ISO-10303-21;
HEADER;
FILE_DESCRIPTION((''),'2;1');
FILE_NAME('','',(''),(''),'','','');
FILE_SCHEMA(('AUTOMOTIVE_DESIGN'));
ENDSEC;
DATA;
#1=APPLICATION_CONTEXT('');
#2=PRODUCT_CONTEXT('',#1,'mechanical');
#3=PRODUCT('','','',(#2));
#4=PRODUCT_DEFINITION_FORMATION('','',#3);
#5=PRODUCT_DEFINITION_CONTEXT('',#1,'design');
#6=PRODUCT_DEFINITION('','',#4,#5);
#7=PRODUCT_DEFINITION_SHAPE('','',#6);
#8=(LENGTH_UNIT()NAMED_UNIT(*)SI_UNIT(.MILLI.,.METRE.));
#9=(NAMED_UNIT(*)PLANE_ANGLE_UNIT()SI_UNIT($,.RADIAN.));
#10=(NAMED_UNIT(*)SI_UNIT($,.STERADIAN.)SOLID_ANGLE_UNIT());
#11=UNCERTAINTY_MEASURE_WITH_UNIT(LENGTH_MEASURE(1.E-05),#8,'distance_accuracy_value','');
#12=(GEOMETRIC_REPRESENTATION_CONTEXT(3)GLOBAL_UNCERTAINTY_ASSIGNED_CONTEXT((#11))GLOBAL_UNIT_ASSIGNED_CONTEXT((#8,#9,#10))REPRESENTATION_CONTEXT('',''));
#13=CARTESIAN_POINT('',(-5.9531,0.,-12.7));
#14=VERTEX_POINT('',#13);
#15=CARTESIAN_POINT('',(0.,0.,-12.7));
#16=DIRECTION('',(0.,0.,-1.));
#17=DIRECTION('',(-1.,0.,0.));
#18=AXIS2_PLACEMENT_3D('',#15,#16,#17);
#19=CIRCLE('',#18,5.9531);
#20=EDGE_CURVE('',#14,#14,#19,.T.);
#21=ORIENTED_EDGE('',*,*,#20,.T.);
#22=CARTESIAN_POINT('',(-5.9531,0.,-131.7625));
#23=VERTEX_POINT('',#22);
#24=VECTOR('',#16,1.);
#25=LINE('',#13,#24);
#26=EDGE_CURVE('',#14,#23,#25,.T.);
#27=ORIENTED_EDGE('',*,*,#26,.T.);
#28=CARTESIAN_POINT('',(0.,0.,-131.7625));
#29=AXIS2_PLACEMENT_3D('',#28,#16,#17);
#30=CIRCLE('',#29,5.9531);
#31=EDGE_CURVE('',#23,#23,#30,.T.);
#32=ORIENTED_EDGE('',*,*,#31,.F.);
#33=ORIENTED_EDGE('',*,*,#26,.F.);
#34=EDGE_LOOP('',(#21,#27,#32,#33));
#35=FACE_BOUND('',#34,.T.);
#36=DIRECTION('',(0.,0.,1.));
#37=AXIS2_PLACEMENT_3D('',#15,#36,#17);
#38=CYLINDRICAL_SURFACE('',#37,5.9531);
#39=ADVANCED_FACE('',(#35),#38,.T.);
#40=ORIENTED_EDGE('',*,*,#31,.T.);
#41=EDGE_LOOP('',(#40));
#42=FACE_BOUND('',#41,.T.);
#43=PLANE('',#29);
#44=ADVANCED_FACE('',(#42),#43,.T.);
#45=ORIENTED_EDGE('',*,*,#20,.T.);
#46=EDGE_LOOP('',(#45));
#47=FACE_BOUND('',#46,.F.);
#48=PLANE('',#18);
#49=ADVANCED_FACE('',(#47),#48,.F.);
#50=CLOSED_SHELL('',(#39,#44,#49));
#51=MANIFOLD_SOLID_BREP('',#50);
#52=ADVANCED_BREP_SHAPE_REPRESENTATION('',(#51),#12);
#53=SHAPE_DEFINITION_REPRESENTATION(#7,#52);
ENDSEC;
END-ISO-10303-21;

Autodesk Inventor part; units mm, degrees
ref_plane "YZ Plane" through (0, 0, 0) normal (1, 0, 0) x (0, 1, 0)
ref_plane "XZ Plane" through (0, 0, 0) normal (0, 1, 0) x (-1, 0, 0)
ref_plane "XY Plane" through (0, 0, 0) normal (0, 0, 1) x (1, 0, 0)
ref_plane "Work Plane1" through (0, 0, -12.7) normal (0, 0, -1) x (-1, 0, 0)
sketch "Sketch1" plane through (0, 0, -12.7) normal (0, 0, -1) x (-1, 0, 0)
  circle A0 centre (0, 0) radius 5.9531
  point P0 (0, 0)
  dimension "d0" = 11.9062
extrude "Extrusion1" add sketch "Sketch1" along normal blind 119.0625
properties part number "wheelAxel01" material "Stainless Steel"
